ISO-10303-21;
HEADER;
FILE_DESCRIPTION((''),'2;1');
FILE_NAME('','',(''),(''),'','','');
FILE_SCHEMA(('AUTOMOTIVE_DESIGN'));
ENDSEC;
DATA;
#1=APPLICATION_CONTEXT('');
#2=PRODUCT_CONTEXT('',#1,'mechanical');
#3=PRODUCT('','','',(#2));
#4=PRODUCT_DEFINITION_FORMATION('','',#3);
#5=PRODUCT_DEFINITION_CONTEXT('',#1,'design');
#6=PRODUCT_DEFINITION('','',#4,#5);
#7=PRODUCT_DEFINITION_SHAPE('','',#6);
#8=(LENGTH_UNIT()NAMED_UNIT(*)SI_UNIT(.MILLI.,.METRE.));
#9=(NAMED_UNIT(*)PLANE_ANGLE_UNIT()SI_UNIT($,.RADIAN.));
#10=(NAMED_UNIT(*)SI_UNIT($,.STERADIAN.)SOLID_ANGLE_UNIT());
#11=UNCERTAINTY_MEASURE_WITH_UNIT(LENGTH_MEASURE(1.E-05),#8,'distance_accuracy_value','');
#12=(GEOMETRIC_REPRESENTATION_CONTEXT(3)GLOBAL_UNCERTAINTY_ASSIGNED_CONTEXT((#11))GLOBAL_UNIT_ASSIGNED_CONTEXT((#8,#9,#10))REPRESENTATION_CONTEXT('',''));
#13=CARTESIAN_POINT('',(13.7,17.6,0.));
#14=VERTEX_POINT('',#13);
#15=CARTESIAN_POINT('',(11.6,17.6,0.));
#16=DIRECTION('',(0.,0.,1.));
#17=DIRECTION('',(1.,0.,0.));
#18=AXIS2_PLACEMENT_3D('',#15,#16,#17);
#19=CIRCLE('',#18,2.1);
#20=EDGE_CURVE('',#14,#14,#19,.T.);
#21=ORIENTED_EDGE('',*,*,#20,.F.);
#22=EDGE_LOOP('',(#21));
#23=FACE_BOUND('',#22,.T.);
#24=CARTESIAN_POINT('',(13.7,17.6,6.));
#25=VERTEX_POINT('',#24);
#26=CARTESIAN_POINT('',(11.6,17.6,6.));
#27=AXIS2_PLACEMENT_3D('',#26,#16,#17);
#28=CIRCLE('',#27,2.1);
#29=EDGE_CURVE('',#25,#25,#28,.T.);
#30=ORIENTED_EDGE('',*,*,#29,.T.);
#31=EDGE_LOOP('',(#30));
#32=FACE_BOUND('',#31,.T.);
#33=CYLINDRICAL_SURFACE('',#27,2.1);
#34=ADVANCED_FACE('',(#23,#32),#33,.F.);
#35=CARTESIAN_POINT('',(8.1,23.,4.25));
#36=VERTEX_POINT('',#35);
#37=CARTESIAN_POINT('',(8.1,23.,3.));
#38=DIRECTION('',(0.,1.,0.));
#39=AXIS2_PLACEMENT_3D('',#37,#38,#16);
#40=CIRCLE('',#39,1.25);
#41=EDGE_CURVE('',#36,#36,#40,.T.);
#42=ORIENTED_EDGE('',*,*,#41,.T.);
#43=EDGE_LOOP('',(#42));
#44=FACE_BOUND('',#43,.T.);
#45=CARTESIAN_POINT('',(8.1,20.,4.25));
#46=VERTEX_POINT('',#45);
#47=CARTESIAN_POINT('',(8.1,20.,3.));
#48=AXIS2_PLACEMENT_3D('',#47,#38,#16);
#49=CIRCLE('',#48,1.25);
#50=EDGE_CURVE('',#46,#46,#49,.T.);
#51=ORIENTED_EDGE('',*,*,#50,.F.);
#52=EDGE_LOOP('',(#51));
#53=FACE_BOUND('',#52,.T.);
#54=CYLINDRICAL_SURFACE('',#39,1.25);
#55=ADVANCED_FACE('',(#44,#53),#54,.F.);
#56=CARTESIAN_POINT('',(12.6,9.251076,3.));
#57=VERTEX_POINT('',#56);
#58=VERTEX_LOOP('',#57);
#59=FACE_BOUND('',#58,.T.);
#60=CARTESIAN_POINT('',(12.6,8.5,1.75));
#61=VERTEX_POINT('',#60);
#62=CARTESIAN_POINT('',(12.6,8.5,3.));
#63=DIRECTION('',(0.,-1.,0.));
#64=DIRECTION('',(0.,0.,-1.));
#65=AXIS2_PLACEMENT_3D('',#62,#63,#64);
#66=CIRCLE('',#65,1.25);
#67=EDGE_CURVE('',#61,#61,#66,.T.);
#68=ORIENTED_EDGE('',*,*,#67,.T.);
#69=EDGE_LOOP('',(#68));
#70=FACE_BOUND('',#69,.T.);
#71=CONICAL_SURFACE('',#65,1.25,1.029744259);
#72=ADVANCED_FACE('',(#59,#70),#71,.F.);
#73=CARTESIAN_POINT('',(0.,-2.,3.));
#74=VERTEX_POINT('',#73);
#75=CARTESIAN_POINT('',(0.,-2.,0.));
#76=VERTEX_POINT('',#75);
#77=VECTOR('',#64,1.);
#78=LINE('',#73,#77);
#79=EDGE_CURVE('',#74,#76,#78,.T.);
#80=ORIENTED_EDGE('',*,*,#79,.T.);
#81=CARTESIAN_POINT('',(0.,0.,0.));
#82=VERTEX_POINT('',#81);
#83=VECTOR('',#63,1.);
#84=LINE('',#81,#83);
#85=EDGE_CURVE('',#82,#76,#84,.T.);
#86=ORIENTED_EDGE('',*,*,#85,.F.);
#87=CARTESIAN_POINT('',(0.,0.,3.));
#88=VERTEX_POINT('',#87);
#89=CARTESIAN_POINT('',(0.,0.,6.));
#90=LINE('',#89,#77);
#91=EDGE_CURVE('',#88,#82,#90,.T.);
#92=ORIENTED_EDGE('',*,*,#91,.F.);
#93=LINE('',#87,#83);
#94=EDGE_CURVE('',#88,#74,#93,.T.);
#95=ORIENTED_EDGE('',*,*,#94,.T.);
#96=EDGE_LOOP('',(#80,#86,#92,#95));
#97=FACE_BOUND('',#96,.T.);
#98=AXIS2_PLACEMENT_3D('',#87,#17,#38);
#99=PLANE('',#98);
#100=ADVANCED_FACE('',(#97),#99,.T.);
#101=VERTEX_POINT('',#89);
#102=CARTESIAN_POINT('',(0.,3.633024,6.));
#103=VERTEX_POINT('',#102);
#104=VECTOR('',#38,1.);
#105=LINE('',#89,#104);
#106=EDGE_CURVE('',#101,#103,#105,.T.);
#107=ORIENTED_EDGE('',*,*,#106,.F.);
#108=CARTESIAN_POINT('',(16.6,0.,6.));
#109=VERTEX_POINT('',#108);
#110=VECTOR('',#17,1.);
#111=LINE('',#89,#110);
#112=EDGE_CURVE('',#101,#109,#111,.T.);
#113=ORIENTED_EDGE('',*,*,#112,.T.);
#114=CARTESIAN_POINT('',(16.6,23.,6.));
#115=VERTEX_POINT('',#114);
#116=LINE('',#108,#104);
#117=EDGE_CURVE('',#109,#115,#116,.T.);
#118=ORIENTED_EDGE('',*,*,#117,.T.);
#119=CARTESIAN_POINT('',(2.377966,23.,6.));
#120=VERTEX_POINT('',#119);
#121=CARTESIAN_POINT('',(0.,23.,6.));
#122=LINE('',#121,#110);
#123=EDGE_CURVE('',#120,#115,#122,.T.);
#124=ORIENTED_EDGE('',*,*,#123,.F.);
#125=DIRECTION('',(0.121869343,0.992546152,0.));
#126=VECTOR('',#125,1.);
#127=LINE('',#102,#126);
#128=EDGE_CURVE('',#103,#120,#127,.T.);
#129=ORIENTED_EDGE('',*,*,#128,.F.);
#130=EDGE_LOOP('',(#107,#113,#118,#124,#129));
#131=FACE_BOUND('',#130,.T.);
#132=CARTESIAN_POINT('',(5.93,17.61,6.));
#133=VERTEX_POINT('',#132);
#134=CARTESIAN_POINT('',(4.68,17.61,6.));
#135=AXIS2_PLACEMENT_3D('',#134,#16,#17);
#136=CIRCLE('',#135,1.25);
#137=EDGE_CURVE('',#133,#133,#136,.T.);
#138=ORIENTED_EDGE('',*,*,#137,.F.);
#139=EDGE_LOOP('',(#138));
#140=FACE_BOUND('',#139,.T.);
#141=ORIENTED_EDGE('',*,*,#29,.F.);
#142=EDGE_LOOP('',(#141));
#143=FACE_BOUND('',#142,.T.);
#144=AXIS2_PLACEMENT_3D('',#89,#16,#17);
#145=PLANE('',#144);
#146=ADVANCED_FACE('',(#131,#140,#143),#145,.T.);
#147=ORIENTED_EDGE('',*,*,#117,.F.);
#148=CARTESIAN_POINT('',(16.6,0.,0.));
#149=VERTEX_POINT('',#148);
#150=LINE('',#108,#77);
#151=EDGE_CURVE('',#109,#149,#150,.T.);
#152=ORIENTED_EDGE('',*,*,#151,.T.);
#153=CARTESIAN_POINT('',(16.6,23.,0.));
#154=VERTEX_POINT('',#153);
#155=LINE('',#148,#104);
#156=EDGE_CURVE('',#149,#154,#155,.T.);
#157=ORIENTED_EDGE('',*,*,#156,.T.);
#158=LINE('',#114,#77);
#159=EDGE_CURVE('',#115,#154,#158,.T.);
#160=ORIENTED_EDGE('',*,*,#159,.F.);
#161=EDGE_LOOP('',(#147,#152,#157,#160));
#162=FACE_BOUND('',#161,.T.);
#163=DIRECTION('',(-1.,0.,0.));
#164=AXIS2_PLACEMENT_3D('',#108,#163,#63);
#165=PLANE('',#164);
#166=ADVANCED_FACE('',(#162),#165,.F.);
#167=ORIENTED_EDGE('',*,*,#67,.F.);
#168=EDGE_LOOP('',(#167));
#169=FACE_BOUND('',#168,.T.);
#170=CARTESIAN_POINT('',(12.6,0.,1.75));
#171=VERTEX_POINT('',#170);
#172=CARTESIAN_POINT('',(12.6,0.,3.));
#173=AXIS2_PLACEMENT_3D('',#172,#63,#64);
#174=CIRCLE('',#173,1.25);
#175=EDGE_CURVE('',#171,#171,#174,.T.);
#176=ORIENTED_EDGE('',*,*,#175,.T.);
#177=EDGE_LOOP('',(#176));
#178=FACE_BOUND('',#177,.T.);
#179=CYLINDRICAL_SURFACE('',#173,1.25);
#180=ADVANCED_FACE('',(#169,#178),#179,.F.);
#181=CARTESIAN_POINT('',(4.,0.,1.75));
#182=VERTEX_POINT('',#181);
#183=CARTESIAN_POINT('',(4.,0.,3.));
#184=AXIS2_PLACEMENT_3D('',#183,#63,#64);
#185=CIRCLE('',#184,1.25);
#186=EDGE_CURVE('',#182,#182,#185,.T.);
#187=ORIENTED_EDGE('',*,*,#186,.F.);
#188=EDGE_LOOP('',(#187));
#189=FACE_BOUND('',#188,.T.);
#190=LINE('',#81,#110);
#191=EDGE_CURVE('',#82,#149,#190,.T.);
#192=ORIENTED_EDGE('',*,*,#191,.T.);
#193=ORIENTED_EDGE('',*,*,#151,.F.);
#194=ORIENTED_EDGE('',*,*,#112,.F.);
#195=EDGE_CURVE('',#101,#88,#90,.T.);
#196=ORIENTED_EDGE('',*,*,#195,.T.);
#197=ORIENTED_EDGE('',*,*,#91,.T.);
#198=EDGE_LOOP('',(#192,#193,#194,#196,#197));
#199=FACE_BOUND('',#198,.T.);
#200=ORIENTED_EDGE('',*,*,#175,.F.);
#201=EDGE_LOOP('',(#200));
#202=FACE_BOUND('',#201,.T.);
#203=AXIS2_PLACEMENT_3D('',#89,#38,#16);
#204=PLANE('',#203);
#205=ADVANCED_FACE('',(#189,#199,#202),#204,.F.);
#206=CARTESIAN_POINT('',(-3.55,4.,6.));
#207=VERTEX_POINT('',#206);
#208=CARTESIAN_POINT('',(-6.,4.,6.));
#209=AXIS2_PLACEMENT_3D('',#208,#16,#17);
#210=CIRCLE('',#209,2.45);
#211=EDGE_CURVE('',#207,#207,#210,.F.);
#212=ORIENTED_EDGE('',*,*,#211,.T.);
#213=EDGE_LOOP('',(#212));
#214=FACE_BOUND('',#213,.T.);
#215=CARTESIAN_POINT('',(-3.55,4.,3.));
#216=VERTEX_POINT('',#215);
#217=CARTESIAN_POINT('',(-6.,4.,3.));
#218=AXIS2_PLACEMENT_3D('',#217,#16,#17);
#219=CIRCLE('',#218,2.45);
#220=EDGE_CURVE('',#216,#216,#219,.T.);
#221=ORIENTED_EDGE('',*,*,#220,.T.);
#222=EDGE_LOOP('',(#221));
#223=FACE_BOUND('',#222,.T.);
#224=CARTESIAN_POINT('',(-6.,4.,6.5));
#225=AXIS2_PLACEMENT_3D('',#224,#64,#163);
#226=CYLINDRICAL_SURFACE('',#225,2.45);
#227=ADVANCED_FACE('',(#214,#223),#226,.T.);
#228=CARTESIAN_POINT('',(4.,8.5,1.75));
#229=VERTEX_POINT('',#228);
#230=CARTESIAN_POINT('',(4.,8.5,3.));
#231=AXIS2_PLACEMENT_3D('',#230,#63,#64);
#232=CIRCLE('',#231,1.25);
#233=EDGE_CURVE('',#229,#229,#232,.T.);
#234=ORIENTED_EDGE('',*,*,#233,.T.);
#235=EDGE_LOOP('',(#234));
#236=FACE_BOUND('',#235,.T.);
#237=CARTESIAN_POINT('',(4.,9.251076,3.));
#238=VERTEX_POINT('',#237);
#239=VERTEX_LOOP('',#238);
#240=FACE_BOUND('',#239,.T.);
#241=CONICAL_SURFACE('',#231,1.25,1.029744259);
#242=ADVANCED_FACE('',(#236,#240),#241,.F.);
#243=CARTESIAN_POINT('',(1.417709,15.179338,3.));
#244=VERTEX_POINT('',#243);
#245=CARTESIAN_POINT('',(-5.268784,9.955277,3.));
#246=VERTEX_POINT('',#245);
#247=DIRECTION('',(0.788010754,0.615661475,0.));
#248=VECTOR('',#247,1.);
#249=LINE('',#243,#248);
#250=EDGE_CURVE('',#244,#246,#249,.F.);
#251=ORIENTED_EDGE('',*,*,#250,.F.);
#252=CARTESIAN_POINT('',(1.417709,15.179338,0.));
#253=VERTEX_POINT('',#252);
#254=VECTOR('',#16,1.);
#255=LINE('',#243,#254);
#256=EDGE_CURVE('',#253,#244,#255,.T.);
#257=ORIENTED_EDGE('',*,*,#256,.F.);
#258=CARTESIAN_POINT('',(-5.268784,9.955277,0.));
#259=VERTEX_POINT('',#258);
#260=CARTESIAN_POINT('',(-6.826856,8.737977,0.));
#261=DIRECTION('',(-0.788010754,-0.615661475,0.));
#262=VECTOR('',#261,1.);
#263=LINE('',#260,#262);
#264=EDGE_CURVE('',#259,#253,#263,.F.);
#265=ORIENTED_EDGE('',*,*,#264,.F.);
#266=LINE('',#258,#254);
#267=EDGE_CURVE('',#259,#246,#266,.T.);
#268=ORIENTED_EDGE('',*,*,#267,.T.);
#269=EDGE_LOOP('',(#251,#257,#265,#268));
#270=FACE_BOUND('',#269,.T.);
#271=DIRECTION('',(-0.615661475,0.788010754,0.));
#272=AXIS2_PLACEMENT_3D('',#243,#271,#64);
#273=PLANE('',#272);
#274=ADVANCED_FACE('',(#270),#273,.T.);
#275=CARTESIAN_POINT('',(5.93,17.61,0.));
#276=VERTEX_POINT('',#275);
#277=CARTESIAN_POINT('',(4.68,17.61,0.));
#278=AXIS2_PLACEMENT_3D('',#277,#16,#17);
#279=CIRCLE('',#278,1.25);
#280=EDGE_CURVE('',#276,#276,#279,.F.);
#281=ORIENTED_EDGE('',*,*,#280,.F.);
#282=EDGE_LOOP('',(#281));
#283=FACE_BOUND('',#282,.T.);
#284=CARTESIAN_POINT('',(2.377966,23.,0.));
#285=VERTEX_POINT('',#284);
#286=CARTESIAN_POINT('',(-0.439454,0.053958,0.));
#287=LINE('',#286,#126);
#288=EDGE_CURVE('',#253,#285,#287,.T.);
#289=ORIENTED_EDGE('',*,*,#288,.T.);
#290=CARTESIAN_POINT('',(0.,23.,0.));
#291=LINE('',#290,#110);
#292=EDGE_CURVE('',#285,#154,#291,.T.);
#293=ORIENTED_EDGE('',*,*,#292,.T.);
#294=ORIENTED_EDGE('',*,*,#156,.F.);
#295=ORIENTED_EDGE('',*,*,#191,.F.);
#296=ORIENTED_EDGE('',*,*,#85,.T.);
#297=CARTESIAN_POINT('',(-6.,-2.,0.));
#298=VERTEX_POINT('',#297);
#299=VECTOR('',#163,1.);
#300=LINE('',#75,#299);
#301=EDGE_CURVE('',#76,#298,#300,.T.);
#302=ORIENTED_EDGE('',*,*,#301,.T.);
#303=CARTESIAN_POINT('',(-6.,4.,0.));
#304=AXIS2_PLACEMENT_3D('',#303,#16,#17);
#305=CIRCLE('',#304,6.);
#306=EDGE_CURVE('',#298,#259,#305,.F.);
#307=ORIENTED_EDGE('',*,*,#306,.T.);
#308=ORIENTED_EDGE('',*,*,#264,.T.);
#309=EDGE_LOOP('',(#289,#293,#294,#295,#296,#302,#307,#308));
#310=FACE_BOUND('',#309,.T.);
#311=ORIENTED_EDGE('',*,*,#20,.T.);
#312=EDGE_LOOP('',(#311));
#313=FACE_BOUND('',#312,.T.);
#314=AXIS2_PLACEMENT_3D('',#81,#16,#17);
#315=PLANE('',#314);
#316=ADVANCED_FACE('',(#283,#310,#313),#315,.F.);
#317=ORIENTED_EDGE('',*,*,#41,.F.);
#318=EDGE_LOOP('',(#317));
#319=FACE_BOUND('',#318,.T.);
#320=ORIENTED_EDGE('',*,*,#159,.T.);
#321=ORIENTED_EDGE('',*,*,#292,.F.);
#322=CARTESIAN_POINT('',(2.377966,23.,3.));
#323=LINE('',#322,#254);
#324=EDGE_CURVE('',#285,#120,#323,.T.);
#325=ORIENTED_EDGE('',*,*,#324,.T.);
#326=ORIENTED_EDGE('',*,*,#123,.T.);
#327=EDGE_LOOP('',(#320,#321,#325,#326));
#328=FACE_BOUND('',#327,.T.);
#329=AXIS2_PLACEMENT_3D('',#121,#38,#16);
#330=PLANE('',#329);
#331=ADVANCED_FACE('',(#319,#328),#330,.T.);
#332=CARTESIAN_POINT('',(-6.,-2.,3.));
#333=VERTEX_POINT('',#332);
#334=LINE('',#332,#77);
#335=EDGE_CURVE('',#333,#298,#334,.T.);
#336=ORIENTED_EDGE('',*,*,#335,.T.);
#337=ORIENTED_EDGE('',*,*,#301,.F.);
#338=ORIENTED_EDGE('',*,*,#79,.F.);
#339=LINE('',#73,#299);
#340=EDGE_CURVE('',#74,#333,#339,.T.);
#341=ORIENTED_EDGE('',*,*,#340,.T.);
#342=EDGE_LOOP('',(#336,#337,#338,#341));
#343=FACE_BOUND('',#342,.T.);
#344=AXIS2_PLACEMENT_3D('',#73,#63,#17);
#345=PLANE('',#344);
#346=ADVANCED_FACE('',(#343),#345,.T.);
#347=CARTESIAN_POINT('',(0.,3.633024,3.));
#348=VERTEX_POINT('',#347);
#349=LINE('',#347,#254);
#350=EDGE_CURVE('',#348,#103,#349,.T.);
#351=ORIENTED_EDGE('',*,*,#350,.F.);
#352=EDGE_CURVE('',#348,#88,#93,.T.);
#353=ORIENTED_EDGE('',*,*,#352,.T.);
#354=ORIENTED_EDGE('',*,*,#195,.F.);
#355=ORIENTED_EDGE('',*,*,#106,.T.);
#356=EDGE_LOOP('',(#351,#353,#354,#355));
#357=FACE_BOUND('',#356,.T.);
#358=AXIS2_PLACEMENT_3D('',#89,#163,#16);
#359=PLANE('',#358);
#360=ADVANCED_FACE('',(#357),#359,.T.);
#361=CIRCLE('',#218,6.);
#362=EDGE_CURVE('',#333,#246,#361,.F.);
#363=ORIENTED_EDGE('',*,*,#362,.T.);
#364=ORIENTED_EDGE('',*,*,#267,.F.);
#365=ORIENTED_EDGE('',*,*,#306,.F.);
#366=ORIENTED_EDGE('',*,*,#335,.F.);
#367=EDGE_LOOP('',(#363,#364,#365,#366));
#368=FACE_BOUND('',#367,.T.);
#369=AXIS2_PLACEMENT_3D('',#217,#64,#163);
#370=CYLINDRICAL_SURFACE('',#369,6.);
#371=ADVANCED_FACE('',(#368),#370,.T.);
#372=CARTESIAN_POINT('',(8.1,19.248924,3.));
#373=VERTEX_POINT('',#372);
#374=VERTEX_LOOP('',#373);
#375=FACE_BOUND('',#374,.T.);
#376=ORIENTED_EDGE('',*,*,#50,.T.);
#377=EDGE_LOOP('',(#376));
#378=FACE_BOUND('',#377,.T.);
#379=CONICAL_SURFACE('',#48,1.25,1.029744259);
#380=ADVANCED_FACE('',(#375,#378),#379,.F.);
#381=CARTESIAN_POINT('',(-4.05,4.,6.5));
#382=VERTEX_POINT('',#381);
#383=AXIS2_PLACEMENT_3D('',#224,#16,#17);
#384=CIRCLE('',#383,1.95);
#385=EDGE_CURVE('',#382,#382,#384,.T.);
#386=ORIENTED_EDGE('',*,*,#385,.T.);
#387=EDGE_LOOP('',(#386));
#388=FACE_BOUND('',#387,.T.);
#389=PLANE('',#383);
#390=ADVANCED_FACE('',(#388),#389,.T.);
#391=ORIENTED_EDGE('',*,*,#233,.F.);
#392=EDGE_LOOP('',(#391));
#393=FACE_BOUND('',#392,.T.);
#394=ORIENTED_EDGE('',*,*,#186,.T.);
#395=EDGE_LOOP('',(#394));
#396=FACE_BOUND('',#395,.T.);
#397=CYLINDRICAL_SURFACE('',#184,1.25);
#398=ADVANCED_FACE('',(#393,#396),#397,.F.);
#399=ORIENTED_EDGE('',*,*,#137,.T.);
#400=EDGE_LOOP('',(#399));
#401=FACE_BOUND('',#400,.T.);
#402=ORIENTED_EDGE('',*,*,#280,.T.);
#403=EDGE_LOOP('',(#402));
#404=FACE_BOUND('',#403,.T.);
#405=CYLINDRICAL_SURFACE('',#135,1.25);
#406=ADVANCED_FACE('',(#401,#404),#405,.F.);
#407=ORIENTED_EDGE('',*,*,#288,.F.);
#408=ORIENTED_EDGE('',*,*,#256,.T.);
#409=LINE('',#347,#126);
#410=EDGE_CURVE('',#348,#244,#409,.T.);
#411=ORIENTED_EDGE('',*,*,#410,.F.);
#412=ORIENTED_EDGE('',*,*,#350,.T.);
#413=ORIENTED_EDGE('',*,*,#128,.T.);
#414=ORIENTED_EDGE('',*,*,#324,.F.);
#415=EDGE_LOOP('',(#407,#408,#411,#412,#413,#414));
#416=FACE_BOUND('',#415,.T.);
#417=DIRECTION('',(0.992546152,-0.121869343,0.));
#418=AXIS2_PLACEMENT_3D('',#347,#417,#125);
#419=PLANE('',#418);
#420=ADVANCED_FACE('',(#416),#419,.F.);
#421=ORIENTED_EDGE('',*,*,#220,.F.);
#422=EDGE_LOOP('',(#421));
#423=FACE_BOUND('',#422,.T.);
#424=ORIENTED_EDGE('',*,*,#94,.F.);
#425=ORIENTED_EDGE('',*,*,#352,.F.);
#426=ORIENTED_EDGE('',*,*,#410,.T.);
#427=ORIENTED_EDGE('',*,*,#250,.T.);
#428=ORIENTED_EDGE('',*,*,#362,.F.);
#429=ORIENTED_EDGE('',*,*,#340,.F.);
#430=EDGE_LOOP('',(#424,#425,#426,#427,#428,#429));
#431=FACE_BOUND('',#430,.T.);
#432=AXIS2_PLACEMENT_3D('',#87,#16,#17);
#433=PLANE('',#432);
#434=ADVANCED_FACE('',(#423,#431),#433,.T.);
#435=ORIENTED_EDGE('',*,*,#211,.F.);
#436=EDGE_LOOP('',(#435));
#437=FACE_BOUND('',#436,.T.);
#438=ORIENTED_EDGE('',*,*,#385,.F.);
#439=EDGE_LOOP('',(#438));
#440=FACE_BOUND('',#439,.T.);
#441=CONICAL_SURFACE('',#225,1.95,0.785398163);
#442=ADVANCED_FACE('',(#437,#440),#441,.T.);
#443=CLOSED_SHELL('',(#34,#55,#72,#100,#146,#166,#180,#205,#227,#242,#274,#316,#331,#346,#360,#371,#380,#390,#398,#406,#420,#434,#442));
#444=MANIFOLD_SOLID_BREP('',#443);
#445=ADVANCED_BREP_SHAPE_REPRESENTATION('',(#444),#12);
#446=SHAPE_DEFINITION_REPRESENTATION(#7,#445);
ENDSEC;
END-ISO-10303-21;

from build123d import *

# Parameters (mm, degrees)
RESSALTO_EXTRUS_O1_DEPTH      = 3
ESBO_O1_3_W                   = 16.6
ESBO_O1_3_H                   = 23
ESBO_O1_3_R                   = 2
ESBO_O1_3_R_2                 = 0.5
RESSALTO_EXTRUS_O2_DEPTH      = 6
CORTE_EXTRUS_O1_DEPTH         = 3
CORTE_EXTRUS_O2_DEPTH         = 29.522973197
CHANFRO1_SIZE                 = 6
FURO_ROSCADO_DE_M3X0_51_D     = 2.5
FURO_ROSCADO_DE_M3X0_51_DEPTH = 8.5
FURO_ROSCADO_DE_M3X0_51_TIP   = 0.751075774
FURO_ROSCADO_DE_M3X0_52_D     = 2.5
FURO_ROSCADO_DE_M3X0_53_D     = 2.5
FURO_ROSCADO_DE_M3X0_53_DEPTH = 3
FURO_ROSCADO_DE_M3X0_53_TIP   = 0.751075774
ESBO_O18_R                    = 2.45
RESSALTO_EXTRUS_O3_DEPTH      = 3.5
CHANFRO2_SIZE                 = 0.5
FURO_ROSCADO_DE_M5X0_81_D     = 4.2
FURO_ROSCADO_DE_M5X0_81_DEPTH = 14
FURO_ROSCADO_DE_M5X0_81_TIP   = 1.2618073


with BuildPart() as part:
    # Esboço1 → Ressalto-extrusão1 (new body)
    with BuildSketch(Plane.XY):
        with BuildLine():
            Line((0, -2), (0, 0))
            Line((0, 0), (0, 16))
            ThreePointArc((0, 16), (-1.757359313, 11.757359313), (-6, 10))
            ThreePointArc((-6, 10), (-12, 4), (-6, -2))
            Line((-6, -2), (0, -2))
        make_face()
    extrude(amount=RESSALTO_EXTRUS_O1_DEPTH)

    # Esboço1<3> → Ressalto-extrusão2 (add)
    with BuildSketch(Plane.XY):
        with Locations((8.3, 11.5)):
            Rectangle(ESBO_O1_3_W, ESBO_O1_3_H)
        with Locations((11.6, 17.6)):
            Circle(ESBO_O1_3_R, mode=Mode.SUBTRACT)
        with Locations((4.68, 17.61)):
            Circle(ESBO_O1_3_R_2, mode=Mode.SUBTRACT)
    extrude(amount=RESSALTO_EXTRUS_O2_DEPTH)

    # Esboço2 → Corte-extrusão1 (cut)
    with BuildSketch(Plane.XY.offset(6)):
        Polygon((0, 3.633024279), (2.37796561, 23), (0, 23), align=None)
    extrude(amount=-CORTE_EXTRUS_O1_DEPTH, mode=Mode.SUBTRACT)

    # Esboço3 → Corte-extrusão2 (cut, through all)
    with BuildSketch(Plane.XY.offset(3)):
        with BuildLine():
            ThreePointArc((-6, 10), (-5.633708763, 9.988808791), (-5.26878394, 9.95527691))
            Line((-5.26878394, 9.95527691), (0.68649297, 9.224060849))
            Line((0.68649297, 9.224060849), (2.37796561, 23))
            Line((2.37796561, 23), (0, 23))
            Line((0, 23), (0, 16))
            ThreePointArc((0, 16), (-1.757359313, 11.757359313), (-6, 10))
        make_face()
    extrude(amount=-CORTE_EXTRUS_O2_DEPTH, mode=Mode.SUBTRACT)

    # Chanfro1
    # the kernel refuses this chamfer: 6 mm, written as the material it adds along each edge
    with BuildSketch(Plane(origin=(0.68649297, 9.224060849, 3), x_dir=(-0.9955217911555101, 0.09453234015153283, 0), z_dir=(0, 0, -1))) as chanfro1_piece_1:
        Polygon((CHANFRO1_SIZE * 0.999621916911, CHANFRO1_SIZE * 0.0274958766106), (-CHANFRO1_SIZE * 0.0274958766106, CHANFRO1_SIZE * 0.999621916911), (0, 0), align=None)
    extrude(amount=3)

    # Furo roscado de M3x0.51
    with Locations(Plane.XZ):
        with Locations((4, 3), (12.6, 3)):
            Hole(FURO_ROSCADO_DE_M3X0_51_D / 2, depth=FURO_ROSCADO_DE_M3X0_51_DEPTH)
            with Locations((0, 0, -(FURO_ROSCADO_DE_M3X0_51_DEPTH + FURO_ROSCADO_DE_M3X0_51_TIP / 2))):  # 118° drill point
                Cone(0, FURO_ROSCADO_DE_M3X0_51_D / 2, FURO_ROSCADO_DE_M3X0_51_TIP, mode=Mode.SUBTRACT)

    # Furo roscado de M3x0.52 (through all)
    with Locations(Plane.XY.offset(6)):
        with Locations((4.68, 17.61)):
            Hole(FURO_ROSCADO_DE_M3X0_52_D / 2)

    # Furo roscado de M3x0.53
    with Locations(Plane(origin=(0, 23, 0), x_dir=(1, 0, 0), z_dir=(0, 1, 0))):
        with Locations((8.1, -3)):
            Hole(FURO_ROSCADO_DE_M3X0_53_D / 2, depth=FURO_ROSCADO_DE_M3X0_53_DEPTH)
            with Locations((0, 0, -(FURO_ROSCADO_DE_M3X0_53_DEPTH + FURO_ROSCADO_DE_M3X0_53_TIP / 2))):  # 118° drill point
                Cone(0, FURO_ROSCADO_DE_M3X0_53_D / 2, FURO_ROSCADO_DE_M3X0_53_TIP, mode=Mode.SUBTRACT)

    # Esboço18 → Ressalto-extrusão3 (add)
    with BuildSketch(Plane.XY.offset(3)):
        with Locations((-6, 4)):
            Circle(ESBO_O18_R)
    extrude(amount=RESSALTO_EXTRUS_O3_DEPTH)

    # Chanfro2
    chanfro2_edges = [part.edges().sort_by_distance(p)[0] for p in [
        (-8.45, 4, 6.5),
    ]]
    chamfer(chanfro2_edges, length=CHANFRO2_SIZE)

    # Furo roscado de M5x0.81
    with Locations(Plane.XY.offset(6)):
        with Locations((11.6, 17.6)):
            Hole(FURO_ROSCADO_DE_M5X0_81_D / 2, depth=FURO_ROSCADO_DE_M5X0_81_DEPTH)
            with Locations((0, 0, -(FURO_ROSCADO_DE_M5X0_81_DEPTH + FURO_ROSCADO_DE_M5X0_81_TIP / 2))):  # 118° drill point
                Cone(0, FURO_ROSCADO_DE_M5X0_81_D / 2, FURO_ROSCADO_DE_M5X0_81_TIP, mode=Mode.SUBTRACT)


solid = part.part
